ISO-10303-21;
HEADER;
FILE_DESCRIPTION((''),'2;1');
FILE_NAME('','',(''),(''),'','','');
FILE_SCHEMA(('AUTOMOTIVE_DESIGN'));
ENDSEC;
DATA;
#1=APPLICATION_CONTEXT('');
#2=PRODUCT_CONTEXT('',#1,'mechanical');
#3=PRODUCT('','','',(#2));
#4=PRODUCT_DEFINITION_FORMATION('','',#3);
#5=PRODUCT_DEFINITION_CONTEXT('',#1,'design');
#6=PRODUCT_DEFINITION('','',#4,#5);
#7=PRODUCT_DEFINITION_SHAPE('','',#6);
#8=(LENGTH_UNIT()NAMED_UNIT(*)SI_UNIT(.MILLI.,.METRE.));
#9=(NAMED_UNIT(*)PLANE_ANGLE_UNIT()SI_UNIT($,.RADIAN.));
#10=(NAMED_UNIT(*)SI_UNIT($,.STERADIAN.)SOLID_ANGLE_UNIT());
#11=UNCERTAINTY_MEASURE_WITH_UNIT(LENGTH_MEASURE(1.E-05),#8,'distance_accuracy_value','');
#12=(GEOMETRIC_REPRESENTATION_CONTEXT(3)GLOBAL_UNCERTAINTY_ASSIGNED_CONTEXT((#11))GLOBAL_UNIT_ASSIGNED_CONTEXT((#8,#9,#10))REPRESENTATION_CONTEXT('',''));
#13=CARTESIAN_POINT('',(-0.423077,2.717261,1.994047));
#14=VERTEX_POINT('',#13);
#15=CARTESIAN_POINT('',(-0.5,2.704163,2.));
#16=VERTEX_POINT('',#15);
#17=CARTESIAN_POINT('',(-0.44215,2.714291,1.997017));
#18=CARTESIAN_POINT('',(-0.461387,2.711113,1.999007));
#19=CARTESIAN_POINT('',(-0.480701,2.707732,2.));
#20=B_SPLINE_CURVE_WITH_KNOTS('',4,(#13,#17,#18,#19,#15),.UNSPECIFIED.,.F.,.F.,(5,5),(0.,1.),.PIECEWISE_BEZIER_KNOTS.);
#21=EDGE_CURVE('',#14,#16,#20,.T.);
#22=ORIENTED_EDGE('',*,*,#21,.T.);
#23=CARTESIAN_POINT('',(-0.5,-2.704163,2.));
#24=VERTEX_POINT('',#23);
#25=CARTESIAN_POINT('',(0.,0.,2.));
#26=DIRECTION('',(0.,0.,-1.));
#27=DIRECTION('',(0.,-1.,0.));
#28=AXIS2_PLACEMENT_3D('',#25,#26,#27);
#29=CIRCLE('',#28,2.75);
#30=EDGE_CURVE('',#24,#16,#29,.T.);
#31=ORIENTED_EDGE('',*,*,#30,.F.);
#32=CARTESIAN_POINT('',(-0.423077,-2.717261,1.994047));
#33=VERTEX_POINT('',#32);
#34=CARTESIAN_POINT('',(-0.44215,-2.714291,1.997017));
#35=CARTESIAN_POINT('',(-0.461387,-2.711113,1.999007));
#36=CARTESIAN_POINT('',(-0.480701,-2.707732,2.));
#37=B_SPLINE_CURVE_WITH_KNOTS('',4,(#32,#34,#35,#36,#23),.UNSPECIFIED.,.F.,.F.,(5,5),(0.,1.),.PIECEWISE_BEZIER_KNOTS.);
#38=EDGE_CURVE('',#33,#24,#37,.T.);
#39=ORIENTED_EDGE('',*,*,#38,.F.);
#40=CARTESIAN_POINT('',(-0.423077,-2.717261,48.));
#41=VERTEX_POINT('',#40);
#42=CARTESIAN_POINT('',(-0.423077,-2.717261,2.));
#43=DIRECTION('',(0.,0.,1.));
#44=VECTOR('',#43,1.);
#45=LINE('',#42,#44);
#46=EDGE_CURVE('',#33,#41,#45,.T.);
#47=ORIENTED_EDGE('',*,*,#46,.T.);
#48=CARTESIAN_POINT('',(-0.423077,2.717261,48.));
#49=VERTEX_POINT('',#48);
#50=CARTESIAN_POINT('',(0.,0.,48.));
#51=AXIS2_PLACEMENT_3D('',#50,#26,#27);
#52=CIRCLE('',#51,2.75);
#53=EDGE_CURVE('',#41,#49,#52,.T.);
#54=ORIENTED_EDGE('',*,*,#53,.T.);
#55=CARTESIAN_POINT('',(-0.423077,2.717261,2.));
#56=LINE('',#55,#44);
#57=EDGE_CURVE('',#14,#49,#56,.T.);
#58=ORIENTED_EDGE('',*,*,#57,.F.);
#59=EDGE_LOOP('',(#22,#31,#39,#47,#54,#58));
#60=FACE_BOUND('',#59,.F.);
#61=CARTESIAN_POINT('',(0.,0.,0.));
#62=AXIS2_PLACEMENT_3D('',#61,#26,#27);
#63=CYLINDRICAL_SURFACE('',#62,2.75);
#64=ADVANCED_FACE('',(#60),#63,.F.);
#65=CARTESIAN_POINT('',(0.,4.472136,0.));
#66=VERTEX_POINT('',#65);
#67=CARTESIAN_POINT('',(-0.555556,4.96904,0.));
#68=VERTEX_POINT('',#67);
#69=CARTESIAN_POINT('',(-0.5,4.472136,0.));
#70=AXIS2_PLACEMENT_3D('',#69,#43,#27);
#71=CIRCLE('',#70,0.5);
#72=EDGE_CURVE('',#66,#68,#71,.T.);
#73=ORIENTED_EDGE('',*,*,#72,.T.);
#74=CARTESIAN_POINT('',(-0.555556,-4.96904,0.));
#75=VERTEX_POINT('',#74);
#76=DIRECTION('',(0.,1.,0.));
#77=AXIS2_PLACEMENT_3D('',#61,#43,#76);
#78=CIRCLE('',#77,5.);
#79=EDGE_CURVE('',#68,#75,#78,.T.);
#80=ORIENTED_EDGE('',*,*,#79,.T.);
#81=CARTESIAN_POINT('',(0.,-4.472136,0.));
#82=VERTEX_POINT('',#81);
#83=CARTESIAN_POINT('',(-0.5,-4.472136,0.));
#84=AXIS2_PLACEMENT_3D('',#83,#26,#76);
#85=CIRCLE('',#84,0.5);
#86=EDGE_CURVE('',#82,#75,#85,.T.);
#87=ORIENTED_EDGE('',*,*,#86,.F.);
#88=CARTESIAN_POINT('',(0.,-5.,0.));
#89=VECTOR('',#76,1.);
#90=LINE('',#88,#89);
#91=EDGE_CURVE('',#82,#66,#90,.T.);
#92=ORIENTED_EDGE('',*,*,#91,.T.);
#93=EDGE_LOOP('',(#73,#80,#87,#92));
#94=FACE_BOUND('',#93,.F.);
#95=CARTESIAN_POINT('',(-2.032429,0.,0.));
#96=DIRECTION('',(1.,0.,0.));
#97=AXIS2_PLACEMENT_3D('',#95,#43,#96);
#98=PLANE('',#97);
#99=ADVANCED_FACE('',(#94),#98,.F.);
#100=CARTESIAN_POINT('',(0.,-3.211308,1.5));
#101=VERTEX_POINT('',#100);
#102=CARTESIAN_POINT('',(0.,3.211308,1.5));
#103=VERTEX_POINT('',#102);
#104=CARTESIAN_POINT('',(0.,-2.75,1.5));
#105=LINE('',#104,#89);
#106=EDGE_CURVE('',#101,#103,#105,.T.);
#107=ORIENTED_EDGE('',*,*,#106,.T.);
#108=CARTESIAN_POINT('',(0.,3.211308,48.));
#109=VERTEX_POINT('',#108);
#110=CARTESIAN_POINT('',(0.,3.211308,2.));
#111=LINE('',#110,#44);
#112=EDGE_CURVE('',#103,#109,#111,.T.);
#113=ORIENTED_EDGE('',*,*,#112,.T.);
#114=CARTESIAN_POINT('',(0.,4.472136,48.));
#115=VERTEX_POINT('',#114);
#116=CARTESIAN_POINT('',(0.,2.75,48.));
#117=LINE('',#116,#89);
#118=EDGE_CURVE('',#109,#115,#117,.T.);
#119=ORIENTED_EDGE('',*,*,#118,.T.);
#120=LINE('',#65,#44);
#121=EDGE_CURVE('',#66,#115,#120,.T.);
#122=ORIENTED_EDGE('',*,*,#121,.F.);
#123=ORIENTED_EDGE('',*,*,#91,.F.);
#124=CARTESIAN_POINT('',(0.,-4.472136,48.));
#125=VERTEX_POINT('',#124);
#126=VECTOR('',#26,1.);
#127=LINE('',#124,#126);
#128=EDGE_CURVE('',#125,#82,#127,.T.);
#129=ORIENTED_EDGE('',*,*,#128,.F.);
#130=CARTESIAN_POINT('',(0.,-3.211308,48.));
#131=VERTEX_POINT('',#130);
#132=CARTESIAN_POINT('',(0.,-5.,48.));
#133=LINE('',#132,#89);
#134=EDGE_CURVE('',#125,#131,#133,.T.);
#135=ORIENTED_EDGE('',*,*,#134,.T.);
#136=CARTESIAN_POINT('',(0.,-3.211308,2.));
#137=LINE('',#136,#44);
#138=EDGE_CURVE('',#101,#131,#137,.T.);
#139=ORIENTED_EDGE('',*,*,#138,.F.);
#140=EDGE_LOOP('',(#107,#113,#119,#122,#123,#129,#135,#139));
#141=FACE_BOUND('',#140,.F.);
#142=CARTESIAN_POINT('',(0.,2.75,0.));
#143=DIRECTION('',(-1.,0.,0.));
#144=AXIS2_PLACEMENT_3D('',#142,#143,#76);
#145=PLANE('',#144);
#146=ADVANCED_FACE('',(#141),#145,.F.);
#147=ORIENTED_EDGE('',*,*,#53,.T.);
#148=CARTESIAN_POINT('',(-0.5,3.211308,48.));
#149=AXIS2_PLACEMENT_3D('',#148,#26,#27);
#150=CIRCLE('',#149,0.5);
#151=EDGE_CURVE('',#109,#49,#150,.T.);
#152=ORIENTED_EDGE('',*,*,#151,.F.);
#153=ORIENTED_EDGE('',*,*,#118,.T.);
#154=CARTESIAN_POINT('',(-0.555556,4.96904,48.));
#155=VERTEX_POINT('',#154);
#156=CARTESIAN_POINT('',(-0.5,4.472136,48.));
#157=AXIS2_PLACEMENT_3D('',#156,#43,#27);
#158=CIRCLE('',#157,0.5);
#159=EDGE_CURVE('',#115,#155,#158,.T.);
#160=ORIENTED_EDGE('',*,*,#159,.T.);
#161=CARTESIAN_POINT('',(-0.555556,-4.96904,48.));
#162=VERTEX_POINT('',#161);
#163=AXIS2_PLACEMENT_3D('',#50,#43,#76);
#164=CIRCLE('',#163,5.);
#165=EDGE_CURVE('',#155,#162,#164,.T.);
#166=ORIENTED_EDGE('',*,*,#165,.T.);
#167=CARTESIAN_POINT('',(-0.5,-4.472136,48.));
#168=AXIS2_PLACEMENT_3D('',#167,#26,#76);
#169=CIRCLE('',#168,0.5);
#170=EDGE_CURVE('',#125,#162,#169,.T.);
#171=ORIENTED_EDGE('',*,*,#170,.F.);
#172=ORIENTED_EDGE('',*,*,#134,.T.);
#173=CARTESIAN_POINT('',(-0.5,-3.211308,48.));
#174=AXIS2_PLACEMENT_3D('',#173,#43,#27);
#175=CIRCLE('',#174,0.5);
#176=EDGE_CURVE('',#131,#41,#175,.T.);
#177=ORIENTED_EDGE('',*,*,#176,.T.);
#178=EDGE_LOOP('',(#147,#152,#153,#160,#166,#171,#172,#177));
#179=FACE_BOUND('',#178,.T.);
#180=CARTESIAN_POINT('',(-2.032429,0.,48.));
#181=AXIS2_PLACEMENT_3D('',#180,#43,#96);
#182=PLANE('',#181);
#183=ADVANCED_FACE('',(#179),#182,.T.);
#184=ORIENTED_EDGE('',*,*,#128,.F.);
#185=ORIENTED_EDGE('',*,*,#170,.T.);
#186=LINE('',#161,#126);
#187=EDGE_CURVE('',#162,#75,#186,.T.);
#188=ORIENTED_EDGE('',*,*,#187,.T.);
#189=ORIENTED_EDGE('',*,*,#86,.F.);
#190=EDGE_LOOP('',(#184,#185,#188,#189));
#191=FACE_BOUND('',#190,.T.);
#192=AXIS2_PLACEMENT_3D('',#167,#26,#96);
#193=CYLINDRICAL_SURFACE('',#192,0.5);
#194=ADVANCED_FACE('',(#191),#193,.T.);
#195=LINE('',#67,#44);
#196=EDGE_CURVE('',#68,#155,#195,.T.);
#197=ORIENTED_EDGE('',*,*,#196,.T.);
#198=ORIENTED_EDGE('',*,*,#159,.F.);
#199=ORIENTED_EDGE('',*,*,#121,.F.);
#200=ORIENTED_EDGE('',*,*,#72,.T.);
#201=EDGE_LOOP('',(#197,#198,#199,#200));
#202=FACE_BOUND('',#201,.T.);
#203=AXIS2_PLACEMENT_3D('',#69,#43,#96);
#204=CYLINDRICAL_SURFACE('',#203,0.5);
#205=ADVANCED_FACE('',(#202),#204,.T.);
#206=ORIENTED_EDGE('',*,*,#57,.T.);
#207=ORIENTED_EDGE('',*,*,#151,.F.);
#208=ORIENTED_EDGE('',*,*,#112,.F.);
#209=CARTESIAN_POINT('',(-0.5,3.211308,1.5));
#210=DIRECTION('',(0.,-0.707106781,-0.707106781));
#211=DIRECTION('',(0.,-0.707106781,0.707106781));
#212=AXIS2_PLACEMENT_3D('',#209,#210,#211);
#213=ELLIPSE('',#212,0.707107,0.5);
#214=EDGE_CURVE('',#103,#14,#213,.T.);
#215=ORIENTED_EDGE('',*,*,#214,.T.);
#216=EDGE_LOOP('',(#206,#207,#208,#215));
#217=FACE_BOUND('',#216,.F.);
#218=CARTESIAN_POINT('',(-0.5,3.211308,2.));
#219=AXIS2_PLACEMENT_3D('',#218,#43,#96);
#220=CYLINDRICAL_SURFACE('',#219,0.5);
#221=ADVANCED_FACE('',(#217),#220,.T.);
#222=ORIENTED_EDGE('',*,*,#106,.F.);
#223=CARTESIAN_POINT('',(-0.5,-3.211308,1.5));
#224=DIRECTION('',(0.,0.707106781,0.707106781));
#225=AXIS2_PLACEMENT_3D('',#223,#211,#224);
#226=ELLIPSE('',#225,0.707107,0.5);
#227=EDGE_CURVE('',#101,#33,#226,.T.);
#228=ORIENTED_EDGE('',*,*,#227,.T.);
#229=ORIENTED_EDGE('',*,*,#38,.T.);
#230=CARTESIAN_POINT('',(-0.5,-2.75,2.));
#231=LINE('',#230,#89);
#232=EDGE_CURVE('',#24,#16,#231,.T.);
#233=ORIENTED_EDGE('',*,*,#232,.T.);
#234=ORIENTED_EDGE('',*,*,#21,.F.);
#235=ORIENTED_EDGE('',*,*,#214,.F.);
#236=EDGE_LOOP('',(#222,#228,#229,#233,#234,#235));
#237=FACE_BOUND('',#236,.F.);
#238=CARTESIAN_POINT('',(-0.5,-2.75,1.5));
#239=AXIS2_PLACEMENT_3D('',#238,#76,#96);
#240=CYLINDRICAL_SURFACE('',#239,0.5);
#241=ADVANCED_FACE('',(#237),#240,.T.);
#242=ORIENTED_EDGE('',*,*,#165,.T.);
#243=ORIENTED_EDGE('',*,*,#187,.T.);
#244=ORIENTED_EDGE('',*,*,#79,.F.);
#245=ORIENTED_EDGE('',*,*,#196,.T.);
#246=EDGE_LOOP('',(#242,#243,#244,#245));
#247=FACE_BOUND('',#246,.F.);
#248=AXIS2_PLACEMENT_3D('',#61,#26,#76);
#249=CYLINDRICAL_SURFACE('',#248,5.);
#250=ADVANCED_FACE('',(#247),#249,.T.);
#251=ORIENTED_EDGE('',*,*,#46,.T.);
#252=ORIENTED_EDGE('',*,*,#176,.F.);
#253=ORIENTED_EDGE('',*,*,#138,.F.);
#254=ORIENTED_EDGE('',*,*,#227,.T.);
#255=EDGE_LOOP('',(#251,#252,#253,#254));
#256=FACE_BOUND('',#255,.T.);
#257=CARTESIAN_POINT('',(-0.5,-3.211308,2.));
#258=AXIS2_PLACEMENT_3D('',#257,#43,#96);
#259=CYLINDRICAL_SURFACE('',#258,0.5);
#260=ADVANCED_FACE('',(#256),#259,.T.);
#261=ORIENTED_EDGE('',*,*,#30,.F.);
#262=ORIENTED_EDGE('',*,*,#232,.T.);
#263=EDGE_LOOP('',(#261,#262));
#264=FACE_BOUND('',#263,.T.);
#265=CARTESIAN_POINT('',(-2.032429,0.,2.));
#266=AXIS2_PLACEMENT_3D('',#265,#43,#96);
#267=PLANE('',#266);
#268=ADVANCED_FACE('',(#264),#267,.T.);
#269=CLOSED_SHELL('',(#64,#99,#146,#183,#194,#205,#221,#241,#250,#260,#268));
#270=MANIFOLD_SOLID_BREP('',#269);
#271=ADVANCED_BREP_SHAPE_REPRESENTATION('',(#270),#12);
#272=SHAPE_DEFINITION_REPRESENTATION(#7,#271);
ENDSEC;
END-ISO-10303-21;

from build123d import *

# Parameters (mm, degrees)
F1_DEPTH = 48
F2_DEPTH = 2
F3_R     = 0.5


with BuildPart() as f1:
    # F0 (on Top) → F1 (new body)
    with BuildSketch(Plane.XY):
        with BuildLine():
            Line((0, 2.75), (0, 5))
            ThreePointArc((0, 5), (-5, 0), (0, -5))
            Line((0, -5), (0, -2.75))
            ThreePointArc((0, -2.75), (-2.75, 0), (0, 2.75))
        make_face()
    extrude(amount=F1_DEPTH)

    # F0 (on Top) → F2 (join)
    with BuildSketch(Plane.XY):
        with BuildLine():
            Line((0, 2.75), (0, 5))
            ThreePointArc((0, 5), (-5, 0), (0, -5))
            Line((0, -5), (0, -2.75))
            ThreePointArc((0, -2.75), (-2.75, 0), (0, 2.75))
        make_face()
        with BuildLine():
            Line((0, -2.75), (0, 2.75))
            ThreePointArc((0, 2.75), (-2.75, 0), (0, -2.75))
        make_face()
    extrude(amount=F2_DEPTH)

    # F3
    f3_edges = [f1.edges().sort_by_distance(p)[0] for p in [
        (0, 2.75, 25),
        (0, -2.75, 25),
        (0, -5, 24),
        (0, 0, 2),
        (0, 5, 24),
    ]]
    fillet(f3_edges, radius=F3_R)


solid = f1.part
